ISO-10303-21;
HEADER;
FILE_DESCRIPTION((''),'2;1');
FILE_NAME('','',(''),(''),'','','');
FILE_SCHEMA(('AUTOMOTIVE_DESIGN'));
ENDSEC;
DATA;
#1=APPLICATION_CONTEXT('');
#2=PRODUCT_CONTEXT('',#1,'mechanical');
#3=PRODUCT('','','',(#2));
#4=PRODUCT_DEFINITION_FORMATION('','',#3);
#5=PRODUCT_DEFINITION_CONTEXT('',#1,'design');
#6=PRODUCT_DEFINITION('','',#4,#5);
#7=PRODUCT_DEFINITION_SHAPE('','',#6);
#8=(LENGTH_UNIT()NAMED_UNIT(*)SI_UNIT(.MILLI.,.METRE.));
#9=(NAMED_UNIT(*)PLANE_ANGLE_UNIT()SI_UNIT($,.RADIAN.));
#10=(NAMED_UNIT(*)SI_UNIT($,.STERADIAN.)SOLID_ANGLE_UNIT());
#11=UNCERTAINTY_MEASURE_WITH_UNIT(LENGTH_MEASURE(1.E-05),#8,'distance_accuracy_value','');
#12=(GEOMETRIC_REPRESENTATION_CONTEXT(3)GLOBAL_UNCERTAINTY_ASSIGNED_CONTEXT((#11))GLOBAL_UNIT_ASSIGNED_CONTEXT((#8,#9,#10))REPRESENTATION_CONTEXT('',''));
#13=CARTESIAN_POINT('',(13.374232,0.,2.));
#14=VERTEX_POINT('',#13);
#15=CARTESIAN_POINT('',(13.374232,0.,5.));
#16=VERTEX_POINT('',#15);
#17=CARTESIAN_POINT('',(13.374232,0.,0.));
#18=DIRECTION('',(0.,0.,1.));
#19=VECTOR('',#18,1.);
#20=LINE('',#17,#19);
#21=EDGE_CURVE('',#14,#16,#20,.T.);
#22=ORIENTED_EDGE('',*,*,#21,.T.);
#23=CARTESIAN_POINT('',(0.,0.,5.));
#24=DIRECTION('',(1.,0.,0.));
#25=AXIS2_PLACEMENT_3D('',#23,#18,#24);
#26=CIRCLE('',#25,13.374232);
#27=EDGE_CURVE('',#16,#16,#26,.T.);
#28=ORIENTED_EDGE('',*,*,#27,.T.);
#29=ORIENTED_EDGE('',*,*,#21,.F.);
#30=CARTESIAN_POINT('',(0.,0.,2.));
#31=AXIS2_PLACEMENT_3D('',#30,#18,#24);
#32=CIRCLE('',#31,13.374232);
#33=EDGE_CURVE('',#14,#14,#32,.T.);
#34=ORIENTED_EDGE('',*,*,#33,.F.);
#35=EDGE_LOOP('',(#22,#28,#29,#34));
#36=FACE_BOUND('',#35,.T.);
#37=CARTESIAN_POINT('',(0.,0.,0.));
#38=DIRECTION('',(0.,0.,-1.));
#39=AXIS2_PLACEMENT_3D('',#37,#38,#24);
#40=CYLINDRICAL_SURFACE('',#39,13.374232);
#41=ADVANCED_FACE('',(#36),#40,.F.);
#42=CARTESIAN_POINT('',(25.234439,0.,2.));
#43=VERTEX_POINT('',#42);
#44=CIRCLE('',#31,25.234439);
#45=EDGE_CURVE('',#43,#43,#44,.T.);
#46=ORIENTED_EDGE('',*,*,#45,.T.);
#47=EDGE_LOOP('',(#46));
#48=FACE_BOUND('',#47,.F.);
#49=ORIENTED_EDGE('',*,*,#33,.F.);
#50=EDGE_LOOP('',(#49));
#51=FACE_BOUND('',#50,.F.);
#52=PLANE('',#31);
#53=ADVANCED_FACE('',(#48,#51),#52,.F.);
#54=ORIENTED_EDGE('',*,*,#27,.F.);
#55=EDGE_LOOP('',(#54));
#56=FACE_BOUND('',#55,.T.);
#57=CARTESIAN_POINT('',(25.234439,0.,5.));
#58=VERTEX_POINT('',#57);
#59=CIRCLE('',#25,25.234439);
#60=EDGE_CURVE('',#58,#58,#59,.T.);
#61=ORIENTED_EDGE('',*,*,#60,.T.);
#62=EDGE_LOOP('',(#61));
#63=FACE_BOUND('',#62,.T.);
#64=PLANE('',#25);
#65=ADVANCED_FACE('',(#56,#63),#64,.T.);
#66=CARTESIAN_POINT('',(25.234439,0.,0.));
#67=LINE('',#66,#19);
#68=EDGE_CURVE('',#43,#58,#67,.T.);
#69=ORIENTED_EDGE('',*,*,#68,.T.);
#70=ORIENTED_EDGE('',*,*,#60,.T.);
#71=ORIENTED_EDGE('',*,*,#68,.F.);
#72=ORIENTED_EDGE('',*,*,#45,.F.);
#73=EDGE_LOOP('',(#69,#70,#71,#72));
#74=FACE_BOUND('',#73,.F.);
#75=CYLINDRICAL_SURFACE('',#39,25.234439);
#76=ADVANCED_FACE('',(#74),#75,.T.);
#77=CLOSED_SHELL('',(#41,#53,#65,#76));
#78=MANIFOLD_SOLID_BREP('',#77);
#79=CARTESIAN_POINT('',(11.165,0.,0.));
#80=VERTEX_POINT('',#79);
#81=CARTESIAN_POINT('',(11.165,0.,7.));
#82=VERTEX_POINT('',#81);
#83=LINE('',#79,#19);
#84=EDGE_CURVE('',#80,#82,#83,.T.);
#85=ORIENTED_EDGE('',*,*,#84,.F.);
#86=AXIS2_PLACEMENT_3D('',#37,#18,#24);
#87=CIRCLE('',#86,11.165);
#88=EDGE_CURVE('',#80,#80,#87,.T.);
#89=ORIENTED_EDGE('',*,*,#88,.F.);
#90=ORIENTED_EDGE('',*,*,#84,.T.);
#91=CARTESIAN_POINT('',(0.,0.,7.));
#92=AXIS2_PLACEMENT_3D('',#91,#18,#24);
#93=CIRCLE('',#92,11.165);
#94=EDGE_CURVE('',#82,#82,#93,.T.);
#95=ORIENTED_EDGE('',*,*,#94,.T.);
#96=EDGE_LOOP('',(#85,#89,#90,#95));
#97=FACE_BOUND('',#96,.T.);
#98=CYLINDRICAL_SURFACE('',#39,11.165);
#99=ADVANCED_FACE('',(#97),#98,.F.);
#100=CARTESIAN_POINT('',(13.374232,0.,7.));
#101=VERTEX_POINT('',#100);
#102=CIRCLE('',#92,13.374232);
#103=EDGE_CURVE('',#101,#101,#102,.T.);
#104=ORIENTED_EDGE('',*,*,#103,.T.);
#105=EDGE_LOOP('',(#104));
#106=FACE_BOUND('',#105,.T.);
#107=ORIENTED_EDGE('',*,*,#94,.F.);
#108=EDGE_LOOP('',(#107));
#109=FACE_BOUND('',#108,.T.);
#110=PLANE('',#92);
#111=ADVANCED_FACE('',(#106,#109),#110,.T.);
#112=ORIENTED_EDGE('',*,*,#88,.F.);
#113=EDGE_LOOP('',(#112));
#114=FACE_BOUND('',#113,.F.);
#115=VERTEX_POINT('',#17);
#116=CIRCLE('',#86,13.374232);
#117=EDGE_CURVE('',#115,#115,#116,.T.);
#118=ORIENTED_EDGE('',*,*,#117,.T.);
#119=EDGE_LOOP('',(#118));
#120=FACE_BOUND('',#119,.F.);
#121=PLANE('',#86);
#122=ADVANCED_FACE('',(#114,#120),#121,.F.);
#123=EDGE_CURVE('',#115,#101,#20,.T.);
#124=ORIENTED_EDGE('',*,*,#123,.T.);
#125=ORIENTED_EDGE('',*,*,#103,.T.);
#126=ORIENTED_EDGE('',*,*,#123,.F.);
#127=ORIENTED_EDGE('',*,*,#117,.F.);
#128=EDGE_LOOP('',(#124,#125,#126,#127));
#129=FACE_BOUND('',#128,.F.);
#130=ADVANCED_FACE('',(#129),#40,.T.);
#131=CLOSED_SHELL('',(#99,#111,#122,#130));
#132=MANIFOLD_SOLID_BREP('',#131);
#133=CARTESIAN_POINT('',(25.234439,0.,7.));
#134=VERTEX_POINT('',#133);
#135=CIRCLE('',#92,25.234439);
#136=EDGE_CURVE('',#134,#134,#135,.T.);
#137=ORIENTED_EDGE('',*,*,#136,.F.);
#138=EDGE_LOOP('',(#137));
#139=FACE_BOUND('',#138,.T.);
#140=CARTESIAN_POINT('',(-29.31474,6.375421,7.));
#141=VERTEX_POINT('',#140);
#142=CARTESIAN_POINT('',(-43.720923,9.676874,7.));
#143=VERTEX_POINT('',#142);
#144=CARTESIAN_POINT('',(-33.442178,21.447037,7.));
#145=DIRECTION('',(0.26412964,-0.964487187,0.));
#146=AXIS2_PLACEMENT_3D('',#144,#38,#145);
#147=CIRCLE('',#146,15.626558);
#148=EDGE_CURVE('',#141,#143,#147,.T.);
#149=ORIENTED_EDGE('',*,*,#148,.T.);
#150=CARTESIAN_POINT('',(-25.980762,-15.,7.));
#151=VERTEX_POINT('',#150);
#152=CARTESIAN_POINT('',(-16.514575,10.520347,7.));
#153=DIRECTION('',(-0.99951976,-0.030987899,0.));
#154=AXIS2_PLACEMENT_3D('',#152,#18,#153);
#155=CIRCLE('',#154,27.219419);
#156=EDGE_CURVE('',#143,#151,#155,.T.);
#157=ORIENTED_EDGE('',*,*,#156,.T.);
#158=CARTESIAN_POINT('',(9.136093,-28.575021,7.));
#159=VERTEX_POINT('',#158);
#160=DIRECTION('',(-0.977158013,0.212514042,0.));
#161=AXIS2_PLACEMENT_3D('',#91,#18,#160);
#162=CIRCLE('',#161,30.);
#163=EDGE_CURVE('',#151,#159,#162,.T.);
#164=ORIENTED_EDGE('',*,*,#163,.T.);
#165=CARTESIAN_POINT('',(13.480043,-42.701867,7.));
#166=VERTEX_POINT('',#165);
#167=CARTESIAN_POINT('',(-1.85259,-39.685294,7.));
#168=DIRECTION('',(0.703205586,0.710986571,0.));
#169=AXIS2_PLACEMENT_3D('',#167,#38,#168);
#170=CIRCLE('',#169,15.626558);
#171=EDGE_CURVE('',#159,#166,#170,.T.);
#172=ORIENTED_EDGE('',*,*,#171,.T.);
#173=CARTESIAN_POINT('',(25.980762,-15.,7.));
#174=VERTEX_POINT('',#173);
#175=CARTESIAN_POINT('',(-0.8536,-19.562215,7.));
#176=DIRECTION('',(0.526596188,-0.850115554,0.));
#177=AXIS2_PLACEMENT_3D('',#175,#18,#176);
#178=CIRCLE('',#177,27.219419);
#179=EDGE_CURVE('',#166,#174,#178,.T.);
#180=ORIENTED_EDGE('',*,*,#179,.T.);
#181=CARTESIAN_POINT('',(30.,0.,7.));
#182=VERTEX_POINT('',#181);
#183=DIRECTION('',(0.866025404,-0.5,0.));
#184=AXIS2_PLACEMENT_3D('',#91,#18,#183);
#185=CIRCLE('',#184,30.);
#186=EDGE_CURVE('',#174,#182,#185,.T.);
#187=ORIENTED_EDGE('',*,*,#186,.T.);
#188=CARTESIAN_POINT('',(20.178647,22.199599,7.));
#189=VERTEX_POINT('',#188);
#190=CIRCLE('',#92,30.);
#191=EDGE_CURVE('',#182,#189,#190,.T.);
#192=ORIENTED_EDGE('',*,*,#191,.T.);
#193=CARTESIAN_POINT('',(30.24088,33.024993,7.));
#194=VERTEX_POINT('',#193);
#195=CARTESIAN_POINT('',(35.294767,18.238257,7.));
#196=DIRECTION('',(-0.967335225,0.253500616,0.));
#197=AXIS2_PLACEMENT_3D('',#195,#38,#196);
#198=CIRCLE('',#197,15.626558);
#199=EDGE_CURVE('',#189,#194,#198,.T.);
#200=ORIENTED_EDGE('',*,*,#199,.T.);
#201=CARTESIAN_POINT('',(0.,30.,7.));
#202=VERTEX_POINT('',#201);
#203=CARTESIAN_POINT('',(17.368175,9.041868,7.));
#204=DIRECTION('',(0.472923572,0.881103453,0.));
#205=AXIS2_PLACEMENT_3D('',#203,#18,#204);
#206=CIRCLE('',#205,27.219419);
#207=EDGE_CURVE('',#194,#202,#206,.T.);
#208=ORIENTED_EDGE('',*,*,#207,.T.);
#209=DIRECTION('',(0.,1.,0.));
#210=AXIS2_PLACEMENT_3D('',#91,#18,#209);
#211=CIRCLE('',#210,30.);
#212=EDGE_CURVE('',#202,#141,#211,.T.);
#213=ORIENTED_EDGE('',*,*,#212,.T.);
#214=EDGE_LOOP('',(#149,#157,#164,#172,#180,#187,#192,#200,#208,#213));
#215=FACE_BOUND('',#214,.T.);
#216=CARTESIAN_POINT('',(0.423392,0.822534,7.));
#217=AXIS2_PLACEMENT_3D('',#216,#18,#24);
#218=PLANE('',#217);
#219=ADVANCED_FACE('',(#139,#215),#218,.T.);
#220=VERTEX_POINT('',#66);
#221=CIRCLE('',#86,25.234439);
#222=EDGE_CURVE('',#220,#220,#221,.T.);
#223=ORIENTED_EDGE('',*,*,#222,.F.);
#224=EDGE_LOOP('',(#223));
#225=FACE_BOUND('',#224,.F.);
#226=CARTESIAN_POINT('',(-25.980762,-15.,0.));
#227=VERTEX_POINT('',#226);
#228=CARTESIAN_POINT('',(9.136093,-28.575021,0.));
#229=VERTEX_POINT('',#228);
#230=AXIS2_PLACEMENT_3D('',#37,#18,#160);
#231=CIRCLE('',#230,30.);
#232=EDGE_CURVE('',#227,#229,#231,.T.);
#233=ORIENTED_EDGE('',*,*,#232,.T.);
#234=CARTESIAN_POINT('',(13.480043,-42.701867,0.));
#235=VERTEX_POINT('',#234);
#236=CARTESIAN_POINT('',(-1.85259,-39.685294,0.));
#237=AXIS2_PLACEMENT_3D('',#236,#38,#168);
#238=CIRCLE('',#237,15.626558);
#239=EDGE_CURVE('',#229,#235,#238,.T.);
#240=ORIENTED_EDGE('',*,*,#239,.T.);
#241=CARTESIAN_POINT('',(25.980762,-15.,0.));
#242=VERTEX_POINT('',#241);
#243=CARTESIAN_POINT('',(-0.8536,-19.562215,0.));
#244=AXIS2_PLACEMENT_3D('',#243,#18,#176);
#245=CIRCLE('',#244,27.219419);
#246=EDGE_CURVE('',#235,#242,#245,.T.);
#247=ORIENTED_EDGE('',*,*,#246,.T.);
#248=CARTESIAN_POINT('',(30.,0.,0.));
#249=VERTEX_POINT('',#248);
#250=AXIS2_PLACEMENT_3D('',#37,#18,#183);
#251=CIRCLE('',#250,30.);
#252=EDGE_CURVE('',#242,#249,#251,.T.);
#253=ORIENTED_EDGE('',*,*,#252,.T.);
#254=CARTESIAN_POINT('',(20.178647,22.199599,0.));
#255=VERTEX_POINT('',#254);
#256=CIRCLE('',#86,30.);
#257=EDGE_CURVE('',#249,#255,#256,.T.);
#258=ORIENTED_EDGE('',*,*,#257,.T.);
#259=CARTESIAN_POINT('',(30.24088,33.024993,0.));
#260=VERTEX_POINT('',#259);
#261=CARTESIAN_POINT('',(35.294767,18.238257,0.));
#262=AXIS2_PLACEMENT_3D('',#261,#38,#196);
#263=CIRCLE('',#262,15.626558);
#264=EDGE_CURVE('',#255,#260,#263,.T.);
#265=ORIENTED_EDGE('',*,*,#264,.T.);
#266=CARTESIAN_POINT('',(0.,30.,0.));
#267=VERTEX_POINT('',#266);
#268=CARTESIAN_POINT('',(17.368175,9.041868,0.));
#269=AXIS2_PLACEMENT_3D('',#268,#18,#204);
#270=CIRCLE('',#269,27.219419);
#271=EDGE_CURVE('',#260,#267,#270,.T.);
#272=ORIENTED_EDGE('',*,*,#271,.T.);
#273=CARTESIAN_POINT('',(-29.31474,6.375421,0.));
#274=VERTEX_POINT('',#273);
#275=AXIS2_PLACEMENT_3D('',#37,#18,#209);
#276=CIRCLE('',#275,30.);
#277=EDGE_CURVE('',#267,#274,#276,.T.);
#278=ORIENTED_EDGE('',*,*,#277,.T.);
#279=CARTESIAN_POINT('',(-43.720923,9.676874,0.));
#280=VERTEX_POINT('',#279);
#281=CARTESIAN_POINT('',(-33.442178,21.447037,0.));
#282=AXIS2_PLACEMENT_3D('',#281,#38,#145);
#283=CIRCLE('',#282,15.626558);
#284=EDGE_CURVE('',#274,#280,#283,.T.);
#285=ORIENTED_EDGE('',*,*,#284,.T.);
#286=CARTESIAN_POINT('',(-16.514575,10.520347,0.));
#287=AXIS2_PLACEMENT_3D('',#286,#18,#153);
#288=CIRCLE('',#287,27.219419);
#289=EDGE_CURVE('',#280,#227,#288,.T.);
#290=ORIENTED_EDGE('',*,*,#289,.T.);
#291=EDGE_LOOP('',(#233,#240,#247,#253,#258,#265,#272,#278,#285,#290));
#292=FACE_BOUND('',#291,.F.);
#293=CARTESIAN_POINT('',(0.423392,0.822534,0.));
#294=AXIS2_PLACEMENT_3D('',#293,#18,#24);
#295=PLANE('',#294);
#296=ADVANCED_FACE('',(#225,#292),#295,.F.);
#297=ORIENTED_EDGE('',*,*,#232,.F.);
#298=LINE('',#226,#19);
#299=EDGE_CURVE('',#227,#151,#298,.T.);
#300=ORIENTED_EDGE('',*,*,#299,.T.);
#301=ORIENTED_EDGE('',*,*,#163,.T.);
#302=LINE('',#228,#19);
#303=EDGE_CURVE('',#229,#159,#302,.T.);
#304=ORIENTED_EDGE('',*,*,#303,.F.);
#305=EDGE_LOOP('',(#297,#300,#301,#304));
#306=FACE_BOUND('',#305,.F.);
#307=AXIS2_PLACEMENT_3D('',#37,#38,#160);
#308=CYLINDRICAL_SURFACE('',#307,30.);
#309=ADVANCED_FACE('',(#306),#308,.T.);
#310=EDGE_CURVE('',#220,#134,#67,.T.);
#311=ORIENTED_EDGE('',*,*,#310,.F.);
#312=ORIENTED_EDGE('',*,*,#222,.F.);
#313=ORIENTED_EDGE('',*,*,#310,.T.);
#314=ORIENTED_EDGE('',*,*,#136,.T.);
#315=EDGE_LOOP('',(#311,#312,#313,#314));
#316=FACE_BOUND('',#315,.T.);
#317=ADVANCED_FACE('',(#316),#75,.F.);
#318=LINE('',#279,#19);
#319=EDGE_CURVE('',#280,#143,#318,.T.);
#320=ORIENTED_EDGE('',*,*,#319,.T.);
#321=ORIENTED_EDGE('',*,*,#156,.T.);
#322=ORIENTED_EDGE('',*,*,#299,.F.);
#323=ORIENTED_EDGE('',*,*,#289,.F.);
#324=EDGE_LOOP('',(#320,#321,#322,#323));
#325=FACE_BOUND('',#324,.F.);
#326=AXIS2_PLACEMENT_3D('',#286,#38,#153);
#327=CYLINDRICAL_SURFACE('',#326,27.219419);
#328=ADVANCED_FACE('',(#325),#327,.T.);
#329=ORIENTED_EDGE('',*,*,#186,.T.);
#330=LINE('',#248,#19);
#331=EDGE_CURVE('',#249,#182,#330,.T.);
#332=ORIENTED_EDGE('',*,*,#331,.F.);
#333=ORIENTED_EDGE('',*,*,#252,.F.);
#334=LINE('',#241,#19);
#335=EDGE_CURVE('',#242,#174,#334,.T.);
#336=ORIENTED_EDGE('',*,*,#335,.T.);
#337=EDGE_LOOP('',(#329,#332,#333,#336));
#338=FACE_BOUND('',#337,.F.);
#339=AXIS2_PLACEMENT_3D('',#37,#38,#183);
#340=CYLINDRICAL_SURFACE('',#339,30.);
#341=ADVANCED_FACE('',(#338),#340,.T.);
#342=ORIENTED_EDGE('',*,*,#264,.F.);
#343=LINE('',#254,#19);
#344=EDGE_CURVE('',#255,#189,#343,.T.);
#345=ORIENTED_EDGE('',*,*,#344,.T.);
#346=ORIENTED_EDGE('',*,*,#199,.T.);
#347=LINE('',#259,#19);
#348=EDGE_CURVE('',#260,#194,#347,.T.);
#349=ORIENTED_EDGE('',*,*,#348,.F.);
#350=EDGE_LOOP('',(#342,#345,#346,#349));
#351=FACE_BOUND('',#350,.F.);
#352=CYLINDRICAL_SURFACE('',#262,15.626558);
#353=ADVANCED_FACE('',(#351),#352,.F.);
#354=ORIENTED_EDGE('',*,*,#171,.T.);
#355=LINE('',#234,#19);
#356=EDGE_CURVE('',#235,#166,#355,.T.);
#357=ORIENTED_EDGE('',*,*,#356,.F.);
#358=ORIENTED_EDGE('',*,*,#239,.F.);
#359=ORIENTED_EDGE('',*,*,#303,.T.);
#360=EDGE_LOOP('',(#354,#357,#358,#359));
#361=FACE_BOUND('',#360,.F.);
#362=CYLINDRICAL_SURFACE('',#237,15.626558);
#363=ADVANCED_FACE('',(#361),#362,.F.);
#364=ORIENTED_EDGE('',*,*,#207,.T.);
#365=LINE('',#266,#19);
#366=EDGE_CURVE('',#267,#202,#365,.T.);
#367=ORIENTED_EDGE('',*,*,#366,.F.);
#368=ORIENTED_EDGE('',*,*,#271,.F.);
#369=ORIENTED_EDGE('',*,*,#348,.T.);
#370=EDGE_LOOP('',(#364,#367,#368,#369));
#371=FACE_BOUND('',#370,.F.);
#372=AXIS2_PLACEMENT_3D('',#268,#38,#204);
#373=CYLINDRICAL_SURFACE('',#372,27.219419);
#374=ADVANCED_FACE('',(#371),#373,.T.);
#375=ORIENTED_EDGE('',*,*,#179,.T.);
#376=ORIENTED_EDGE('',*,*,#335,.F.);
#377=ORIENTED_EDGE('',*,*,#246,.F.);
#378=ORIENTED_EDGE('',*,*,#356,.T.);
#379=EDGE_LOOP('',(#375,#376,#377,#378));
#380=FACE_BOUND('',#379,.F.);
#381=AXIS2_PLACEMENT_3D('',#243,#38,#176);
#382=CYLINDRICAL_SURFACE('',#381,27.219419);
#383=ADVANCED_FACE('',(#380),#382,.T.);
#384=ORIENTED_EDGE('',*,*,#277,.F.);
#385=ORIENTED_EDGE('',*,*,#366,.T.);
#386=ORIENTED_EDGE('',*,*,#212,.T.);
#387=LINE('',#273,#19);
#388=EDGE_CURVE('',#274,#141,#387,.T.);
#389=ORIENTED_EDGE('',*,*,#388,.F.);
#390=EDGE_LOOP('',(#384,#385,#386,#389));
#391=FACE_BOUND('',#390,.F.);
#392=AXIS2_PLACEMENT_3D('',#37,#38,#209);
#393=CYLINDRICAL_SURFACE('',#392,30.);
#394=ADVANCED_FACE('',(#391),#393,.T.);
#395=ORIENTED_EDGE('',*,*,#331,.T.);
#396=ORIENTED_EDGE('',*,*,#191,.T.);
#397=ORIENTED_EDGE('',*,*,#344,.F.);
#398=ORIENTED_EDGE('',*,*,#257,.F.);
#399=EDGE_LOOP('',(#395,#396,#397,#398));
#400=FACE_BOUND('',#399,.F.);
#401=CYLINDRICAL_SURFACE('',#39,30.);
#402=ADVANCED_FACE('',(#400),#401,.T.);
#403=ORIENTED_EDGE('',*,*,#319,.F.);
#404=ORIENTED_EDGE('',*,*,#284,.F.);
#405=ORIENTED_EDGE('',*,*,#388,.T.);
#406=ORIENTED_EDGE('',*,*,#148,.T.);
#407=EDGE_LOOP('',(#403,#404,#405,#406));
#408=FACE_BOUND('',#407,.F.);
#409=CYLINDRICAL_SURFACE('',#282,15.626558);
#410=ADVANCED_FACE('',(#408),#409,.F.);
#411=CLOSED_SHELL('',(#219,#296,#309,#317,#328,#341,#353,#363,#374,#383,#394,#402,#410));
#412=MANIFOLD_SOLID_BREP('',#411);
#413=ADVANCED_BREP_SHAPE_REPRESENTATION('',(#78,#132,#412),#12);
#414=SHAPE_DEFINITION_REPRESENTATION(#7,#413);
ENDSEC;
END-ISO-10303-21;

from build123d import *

# Parameters (mm, degrees)
F0_R     = 13.3742316953
F0_R_2   = 11.165
F1_DEPTH = 7
F0_R_3   = 25.2344394366
F2_DEPTH = 5
F3_DEPTH = 2


with BuildPart() as f1:
    # F0 (on Top) → F1 (new body)
    with BuildSketch(Plane.XY):
        Circle(F0_R)
        Circle(F0_R_2, mode=Mode.SUBTRACT)
    extrude(amount=F1_DEPTH)


with BuildPart() as f1b:
    # F0 (on Top) → F1, piece 2 (new body)
    with BuildSketch(Plane.XY):
        with BuildLine():
            ThreePointArc((25.9807621135, -15), (28.9777747887, -7.7645713531), (30, 0))
            ThreePointArc((30, 0), (27.4350087398, 12.1375572273), (20.1786469702, 22.1995992408))
            ThreePointArc((20.1786469702, 22.1995992408), (10.8169316993, 27.9820297443), (0, 30))
            ThreePointArc((0, 30), (-18.8246827584, 23.3587525148), (-29.3147403815, 6.3754212698))
            ThreePointArc((-29.3147403815, 6.3754212698), (-29.6416144577, -4.6232772295), (-25.9807621135, -15))
            ThreePointArc((-25.9807621135, -15), (-10.8169316993, -27.9820297443), (9.1360934113, -28.5750205106))
            ThreePointArc((9.1360934113, -28.5750205106), (18.8246827584, -23.3587525148), (25.9807621135, -15))
        make_face()
        Circle(F0_R_3, mode=Mode.SUBTRACT)
        with BuildLine():
            ThreePointArc((0, 30), (10.8169316993, 27.9820297443), (20.1786469702, 22.1995992408))
            ThreePointArc((20.1786469702, 22.1995992408), (23.849043869, 28.8770888286), (30.2408803254, 33.0249927938))
            ThreePointArc((30.2408803254, 33.0249927938), (14.6589394966, 36.1261227315), (0, 30))
        make_face()
        with BuildLine():
            ThreePointArc((-25.9807621135, -15), (-29.6416144577, -4.6232772295), (-29.3147403815, 6.3754212698))
            ThreePointArc((-29.3147403815, 6.3754212698), (-36.9328144474, 6.2153334322), (-43.7209228819, 9.6768741977))
            ThreePointArc((-43.7209228819, 9.6768741977), (-38.615609774, -5.3680473692), (-25.9807621135, -15))
        make_face()
        with BuildLine():
            ThreePointArc((13.4800425565, -42.7018669915), (23.9566702775, -30.7580753623), (25.9807621135, -15))
            ThreePointArc((25.9807621135, -15), (18.8246827584, -23.3587525148), (9.1360934113, -28.5750205106))
            ThreePointArc((9.1360934113, -28.5750205106), (13.0837705784, -35.0924222608), (13.4800425565, -42.7018669915))
        make_face()
    extrude(amount=F1_DEPTH)


with BuildPart() as f2:
    # F0 (on Top) → F2 (new body)
    with BuildSketch(Plane.XY):
        Circle(F0_R_3)
        Circle(F0_R, mode=Mode.SUBTRACT)
    extrude(amount=F2_DEPTH)

    # F0 (on Top) → F3 (cut)
    with BuildSketch(Plane.XY):
        Circle(F0_R_3)
        Circle(F0_R, mode=Mode.SUBTRACT)
    extrude(amount=F3_DEPTH, mode=Mode.SUBTRACT)


solid = Compound([f1.part, f1b.part, f2.part])
